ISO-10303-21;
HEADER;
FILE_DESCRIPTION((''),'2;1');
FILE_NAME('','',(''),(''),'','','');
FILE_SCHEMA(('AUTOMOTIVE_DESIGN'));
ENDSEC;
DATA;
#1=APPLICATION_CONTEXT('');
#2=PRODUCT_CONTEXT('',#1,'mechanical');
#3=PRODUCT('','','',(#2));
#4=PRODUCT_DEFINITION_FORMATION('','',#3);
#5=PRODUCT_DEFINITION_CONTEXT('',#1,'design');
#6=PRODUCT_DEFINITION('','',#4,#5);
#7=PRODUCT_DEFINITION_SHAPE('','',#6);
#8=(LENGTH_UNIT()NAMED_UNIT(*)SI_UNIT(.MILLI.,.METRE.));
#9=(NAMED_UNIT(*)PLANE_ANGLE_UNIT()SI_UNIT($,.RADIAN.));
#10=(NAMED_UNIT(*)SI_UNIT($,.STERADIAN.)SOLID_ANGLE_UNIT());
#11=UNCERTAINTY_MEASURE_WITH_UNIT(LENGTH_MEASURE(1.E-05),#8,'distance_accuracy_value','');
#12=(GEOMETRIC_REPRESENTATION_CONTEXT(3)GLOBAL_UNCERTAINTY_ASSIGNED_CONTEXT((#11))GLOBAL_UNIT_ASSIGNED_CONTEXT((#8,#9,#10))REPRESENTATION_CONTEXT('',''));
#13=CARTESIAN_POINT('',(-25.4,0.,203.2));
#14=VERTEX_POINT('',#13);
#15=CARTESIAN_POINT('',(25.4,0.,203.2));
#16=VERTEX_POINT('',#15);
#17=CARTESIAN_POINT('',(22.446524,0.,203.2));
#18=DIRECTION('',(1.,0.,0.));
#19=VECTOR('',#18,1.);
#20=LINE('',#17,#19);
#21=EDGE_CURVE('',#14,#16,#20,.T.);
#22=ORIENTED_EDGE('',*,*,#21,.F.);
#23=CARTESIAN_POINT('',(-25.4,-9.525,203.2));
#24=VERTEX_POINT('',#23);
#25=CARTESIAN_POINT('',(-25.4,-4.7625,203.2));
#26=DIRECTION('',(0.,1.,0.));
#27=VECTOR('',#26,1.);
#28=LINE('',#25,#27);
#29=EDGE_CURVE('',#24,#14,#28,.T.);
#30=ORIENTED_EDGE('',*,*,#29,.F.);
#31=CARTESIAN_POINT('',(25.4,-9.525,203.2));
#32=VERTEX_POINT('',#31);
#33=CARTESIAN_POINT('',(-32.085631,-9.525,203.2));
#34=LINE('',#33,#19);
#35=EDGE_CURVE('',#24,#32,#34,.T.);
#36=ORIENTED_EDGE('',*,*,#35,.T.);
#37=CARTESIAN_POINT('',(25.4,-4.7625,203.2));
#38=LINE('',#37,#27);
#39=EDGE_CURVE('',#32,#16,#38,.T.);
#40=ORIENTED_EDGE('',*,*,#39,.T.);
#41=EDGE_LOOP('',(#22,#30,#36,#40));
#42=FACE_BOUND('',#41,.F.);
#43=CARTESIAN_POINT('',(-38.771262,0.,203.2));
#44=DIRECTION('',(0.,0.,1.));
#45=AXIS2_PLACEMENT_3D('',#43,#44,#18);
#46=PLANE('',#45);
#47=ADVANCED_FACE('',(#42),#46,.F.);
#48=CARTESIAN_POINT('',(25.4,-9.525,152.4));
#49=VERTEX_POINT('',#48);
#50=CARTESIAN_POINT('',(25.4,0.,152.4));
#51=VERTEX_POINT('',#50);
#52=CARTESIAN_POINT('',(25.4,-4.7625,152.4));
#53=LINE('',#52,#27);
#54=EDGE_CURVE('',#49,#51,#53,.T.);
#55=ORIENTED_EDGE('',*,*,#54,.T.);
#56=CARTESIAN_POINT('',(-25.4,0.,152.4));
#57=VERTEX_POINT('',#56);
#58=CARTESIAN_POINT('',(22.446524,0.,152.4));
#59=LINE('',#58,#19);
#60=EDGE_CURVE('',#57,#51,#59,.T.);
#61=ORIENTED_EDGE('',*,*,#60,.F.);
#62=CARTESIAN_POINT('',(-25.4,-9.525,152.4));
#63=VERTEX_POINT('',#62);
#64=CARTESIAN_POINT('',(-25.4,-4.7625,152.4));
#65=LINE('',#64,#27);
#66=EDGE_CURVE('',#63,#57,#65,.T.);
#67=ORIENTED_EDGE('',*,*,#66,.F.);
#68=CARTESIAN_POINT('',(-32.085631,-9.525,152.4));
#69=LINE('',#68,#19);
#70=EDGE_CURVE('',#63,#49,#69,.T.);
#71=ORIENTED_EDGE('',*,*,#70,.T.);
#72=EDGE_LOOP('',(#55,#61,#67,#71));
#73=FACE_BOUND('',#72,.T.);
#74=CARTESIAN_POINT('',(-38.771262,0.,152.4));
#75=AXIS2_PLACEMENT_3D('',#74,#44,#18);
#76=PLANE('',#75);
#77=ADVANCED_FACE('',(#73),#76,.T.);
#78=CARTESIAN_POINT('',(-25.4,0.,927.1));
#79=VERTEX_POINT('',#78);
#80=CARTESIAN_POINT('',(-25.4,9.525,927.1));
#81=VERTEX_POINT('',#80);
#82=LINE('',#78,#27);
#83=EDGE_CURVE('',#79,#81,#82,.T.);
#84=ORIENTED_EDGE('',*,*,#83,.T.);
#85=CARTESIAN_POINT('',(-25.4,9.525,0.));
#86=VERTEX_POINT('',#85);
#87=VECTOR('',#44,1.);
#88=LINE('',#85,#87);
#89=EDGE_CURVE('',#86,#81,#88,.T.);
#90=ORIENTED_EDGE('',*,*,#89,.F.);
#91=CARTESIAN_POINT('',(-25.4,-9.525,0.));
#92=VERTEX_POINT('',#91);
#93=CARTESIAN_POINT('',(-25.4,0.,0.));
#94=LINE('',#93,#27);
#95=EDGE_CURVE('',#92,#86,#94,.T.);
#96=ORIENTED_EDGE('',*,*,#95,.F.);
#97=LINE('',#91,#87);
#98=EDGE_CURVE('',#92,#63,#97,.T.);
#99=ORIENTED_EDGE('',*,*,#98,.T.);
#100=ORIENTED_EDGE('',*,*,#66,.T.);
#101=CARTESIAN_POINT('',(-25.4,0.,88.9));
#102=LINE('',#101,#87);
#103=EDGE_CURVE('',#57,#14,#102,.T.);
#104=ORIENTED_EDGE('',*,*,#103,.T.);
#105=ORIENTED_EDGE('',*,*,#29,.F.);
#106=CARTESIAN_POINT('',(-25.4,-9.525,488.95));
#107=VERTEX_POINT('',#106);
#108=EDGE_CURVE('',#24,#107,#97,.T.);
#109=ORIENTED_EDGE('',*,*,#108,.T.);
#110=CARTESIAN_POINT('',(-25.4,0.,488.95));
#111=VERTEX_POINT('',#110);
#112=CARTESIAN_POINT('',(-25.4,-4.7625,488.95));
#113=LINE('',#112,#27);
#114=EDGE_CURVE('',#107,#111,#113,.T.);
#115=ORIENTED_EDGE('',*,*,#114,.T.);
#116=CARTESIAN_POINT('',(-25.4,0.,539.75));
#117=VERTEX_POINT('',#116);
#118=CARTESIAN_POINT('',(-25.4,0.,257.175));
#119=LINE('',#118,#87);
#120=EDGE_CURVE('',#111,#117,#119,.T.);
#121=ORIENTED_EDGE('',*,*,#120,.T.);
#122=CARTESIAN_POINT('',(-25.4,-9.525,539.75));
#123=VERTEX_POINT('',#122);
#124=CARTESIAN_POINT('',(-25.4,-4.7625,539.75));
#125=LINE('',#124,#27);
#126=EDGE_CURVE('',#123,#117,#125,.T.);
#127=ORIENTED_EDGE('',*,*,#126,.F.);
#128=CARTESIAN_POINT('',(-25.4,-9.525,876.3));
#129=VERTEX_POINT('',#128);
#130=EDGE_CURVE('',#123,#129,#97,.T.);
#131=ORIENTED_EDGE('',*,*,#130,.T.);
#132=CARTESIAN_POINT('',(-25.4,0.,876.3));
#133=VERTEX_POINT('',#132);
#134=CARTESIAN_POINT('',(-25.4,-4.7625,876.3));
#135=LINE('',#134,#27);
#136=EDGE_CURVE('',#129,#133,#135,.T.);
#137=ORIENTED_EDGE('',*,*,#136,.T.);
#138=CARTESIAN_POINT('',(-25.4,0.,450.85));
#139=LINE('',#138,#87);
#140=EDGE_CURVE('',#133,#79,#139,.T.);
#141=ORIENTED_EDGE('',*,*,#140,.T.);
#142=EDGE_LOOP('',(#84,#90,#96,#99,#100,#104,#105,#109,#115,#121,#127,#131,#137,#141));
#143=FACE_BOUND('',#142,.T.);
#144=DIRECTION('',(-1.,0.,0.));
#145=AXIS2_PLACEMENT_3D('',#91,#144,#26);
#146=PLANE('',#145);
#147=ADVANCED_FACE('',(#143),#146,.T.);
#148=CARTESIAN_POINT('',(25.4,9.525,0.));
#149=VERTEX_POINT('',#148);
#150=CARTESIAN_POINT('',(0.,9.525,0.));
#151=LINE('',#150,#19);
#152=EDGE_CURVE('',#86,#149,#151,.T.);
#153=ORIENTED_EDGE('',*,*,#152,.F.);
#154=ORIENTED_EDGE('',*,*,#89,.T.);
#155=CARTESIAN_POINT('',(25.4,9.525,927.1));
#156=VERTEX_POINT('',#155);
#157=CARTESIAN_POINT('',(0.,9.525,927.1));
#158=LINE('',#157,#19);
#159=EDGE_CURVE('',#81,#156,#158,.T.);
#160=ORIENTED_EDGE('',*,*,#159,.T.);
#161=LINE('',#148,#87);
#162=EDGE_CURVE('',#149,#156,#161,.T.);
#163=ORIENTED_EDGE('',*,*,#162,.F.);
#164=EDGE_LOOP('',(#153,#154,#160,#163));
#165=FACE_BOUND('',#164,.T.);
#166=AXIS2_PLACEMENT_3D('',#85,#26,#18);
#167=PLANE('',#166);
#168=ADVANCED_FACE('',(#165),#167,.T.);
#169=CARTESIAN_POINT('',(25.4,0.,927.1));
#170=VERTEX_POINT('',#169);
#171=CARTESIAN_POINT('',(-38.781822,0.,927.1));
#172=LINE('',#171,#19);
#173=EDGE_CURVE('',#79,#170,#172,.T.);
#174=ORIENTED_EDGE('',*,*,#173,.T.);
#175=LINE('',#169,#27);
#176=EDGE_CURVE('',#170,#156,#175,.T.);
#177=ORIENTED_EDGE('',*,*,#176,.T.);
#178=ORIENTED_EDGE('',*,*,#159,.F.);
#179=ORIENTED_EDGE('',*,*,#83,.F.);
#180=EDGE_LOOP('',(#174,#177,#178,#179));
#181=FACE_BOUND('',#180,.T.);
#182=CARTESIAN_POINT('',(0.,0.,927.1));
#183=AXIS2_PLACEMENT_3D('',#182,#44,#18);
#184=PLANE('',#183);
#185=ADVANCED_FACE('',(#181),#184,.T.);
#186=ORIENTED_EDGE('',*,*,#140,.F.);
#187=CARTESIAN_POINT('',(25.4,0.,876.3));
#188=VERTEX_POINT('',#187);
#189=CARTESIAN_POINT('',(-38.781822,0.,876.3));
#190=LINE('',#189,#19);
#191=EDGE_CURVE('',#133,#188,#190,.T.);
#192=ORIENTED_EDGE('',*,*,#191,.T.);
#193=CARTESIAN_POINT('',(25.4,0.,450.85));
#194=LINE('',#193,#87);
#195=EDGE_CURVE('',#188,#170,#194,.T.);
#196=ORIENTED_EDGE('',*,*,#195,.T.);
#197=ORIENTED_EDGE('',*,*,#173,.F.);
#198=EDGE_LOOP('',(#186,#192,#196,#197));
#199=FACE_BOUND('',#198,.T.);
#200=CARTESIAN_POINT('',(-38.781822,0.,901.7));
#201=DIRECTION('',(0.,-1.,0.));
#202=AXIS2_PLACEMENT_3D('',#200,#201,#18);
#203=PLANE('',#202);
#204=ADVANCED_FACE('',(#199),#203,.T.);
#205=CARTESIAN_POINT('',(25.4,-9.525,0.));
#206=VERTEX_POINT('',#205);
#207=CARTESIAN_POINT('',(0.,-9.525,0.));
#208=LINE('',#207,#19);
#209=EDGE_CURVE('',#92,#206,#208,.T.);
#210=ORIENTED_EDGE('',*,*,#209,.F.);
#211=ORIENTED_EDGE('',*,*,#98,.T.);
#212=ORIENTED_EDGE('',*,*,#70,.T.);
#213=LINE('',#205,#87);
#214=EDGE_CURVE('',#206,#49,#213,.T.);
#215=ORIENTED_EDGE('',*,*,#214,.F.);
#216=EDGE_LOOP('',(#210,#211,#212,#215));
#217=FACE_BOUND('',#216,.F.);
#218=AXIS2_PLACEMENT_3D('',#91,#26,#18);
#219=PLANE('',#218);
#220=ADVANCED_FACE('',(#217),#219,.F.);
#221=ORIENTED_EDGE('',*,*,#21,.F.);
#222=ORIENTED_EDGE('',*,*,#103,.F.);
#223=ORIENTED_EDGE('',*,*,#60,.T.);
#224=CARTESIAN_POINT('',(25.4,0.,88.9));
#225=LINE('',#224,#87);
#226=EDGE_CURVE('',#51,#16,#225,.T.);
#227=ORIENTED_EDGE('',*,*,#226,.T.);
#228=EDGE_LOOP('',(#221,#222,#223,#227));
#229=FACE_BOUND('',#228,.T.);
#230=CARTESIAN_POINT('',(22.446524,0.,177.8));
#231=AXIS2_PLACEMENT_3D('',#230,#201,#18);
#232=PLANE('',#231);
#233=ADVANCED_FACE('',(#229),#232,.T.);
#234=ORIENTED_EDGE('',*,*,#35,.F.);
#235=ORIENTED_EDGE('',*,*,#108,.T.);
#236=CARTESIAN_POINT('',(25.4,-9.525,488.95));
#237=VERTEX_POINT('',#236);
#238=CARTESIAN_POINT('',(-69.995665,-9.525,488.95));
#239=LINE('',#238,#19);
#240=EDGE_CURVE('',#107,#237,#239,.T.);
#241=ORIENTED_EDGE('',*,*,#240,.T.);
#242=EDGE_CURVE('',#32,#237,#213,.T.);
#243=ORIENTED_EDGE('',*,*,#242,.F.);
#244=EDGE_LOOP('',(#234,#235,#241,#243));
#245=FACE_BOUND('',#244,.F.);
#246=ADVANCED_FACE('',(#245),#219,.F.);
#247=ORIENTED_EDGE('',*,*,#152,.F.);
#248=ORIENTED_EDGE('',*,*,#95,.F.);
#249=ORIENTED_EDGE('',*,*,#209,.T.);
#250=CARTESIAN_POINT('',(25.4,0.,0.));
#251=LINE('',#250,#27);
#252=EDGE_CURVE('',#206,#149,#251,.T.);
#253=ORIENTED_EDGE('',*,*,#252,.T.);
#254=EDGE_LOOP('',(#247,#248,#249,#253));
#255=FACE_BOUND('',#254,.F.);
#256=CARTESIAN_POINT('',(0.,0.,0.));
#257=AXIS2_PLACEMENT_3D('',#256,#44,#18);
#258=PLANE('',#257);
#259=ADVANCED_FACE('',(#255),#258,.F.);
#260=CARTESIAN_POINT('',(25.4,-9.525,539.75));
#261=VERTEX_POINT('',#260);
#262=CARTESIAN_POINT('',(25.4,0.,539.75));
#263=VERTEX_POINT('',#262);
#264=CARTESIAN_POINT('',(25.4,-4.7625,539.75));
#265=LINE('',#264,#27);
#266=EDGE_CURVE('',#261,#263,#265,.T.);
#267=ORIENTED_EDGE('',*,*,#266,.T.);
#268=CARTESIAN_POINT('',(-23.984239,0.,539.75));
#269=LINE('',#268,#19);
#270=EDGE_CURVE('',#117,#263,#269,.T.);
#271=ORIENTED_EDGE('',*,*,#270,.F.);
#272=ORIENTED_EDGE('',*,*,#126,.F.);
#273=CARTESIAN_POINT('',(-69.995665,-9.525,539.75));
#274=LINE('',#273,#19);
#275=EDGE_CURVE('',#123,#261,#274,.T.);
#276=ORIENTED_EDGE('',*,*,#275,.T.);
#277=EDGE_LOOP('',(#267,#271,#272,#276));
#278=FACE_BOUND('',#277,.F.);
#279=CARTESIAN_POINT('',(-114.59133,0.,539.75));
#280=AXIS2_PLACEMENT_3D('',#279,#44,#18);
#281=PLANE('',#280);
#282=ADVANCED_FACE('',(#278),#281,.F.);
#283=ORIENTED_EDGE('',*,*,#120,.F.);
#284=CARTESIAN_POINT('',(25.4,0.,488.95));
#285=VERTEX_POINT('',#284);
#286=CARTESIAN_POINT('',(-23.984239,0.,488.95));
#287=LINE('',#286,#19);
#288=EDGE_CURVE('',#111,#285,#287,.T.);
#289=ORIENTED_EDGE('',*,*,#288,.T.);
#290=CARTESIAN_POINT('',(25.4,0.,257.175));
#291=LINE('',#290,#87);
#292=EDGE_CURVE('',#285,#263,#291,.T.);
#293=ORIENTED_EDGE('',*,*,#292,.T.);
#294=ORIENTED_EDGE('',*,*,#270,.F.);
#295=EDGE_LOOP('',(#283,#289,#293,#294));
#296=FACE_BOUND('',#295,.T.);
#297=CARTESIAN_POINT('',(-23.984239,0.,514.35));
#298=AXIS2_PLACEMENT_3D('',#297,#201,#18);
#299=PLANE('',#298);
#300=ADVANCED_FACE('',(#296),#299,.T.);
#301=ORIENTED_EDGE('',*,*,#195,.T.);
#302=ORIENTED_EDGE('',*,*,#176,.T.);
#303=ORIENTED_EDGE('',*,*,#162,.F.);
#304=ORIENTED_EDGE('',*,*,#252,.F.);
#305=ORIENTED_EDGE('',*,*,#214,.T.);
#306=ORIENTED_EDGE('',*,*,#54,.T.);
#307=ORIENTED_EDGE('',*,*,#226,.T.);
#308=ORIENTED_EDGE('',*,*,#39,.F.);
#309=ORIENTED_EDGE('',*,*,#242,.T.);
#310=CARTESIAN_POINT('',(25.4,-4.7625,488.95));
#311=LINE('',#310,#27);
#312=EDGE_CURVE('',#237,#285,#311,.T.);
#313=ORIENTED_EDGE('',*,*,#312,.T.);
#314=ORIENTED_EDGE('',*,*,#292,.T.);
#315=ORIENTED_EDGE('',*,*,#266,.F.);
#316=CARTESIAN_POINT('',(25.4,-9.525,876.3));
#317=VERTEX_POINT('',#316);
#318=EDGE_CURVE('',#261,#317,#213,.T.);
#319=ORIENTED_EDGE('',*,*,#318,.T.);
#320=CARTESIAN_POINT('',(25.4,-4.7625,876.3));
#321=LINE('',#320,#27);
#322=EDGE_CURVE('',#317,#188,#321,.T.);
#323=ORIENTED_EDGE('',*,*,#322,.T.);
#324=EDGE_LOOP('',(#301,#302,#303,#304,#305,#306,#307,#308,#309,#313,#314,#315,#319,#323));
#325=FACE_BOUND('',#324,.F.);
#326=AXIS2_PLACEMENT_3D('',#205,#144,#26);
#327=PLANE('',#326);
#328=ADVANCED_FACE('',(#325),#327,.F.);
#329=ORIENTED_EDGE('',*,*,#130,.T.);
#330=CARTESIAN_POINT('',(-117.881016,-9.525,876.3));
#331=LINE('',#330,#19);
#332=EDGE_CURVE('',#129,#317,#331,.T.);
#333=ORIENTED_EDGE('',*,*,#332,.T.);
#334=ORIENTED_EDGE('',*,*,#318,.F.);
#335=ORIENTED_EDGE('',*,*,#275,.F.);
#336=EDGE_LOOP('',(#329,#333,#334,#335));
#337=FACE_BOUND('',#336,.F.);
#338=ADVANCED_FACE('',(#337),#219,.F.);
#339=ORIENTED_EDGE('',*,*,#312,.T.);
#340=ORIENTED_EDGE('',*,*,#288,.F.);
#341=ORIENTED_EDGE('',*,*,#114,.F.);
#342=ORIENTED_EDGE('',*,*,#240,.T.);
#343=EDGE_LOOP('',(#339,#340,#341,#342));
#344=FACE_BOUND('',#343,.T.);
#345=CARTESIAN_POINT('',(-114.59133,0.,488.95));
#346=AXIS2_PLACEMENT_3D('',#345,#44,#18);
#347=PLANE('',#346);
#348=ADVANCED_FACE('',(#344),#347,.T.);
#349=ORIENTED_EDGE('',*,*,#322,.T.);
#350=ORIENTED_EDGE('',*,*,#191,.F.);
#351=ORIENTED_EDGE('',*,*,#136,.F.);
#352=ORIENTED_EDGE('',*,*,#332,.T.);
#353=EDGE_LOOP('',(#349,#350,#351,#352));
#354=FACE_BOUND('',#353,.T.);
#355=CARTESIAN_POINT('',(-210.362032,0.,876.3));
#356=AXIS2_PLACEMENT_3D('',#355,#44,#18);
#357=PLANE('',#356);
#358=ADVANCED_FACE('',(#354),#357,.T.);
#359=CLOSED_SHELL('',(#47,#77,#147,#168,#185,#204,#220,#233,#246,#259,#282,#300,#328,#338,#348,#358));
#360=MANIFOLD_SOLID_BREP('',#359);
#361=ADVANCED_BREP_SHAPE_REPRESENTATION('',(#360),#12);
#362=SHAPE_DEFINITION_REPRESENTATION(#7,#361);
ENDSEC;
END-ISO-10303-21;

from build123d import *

# Parameters (mm, degrees)
F0_W     = 50.8
F0_H     = 19.05
F1_DEPTH = 927.1
F2_W     = 122.43557321
F2_H     = 50.8
F2_W_2   = 343.1604206562
F2_W_3   = 181.214183569
F3_DEPTH = 25.4


# Not quite as in the source:
# - a feature names something its author has since deleted; it is built from what else it names


with BuildPart() as f1:
    # F0 (on Top) → F1 (new body)
    with BuildSketch(Plane.XY):
        Rectangle(F0_W, F0_H)
    extrude(amount=F1_DEPTH)

    # F2 (on Front) → F3 (cut)
    with BuildSketch(Plane.XZ):
        with Locations((22.4465244144, 177.8)):
            Rectangle(F2_W, F2_H)
        with Locations((-38.7818217278, 901.7)):
            Rectangle(F2_W_2, F2_H)
        with Locations((-23.9842385054, 514.35)):
            Rectangle(F2_W_3, F2_H)
    extrude(amount=F3_DEPTH, mode=Mode.SUBTRACT)


solid = f1.part
